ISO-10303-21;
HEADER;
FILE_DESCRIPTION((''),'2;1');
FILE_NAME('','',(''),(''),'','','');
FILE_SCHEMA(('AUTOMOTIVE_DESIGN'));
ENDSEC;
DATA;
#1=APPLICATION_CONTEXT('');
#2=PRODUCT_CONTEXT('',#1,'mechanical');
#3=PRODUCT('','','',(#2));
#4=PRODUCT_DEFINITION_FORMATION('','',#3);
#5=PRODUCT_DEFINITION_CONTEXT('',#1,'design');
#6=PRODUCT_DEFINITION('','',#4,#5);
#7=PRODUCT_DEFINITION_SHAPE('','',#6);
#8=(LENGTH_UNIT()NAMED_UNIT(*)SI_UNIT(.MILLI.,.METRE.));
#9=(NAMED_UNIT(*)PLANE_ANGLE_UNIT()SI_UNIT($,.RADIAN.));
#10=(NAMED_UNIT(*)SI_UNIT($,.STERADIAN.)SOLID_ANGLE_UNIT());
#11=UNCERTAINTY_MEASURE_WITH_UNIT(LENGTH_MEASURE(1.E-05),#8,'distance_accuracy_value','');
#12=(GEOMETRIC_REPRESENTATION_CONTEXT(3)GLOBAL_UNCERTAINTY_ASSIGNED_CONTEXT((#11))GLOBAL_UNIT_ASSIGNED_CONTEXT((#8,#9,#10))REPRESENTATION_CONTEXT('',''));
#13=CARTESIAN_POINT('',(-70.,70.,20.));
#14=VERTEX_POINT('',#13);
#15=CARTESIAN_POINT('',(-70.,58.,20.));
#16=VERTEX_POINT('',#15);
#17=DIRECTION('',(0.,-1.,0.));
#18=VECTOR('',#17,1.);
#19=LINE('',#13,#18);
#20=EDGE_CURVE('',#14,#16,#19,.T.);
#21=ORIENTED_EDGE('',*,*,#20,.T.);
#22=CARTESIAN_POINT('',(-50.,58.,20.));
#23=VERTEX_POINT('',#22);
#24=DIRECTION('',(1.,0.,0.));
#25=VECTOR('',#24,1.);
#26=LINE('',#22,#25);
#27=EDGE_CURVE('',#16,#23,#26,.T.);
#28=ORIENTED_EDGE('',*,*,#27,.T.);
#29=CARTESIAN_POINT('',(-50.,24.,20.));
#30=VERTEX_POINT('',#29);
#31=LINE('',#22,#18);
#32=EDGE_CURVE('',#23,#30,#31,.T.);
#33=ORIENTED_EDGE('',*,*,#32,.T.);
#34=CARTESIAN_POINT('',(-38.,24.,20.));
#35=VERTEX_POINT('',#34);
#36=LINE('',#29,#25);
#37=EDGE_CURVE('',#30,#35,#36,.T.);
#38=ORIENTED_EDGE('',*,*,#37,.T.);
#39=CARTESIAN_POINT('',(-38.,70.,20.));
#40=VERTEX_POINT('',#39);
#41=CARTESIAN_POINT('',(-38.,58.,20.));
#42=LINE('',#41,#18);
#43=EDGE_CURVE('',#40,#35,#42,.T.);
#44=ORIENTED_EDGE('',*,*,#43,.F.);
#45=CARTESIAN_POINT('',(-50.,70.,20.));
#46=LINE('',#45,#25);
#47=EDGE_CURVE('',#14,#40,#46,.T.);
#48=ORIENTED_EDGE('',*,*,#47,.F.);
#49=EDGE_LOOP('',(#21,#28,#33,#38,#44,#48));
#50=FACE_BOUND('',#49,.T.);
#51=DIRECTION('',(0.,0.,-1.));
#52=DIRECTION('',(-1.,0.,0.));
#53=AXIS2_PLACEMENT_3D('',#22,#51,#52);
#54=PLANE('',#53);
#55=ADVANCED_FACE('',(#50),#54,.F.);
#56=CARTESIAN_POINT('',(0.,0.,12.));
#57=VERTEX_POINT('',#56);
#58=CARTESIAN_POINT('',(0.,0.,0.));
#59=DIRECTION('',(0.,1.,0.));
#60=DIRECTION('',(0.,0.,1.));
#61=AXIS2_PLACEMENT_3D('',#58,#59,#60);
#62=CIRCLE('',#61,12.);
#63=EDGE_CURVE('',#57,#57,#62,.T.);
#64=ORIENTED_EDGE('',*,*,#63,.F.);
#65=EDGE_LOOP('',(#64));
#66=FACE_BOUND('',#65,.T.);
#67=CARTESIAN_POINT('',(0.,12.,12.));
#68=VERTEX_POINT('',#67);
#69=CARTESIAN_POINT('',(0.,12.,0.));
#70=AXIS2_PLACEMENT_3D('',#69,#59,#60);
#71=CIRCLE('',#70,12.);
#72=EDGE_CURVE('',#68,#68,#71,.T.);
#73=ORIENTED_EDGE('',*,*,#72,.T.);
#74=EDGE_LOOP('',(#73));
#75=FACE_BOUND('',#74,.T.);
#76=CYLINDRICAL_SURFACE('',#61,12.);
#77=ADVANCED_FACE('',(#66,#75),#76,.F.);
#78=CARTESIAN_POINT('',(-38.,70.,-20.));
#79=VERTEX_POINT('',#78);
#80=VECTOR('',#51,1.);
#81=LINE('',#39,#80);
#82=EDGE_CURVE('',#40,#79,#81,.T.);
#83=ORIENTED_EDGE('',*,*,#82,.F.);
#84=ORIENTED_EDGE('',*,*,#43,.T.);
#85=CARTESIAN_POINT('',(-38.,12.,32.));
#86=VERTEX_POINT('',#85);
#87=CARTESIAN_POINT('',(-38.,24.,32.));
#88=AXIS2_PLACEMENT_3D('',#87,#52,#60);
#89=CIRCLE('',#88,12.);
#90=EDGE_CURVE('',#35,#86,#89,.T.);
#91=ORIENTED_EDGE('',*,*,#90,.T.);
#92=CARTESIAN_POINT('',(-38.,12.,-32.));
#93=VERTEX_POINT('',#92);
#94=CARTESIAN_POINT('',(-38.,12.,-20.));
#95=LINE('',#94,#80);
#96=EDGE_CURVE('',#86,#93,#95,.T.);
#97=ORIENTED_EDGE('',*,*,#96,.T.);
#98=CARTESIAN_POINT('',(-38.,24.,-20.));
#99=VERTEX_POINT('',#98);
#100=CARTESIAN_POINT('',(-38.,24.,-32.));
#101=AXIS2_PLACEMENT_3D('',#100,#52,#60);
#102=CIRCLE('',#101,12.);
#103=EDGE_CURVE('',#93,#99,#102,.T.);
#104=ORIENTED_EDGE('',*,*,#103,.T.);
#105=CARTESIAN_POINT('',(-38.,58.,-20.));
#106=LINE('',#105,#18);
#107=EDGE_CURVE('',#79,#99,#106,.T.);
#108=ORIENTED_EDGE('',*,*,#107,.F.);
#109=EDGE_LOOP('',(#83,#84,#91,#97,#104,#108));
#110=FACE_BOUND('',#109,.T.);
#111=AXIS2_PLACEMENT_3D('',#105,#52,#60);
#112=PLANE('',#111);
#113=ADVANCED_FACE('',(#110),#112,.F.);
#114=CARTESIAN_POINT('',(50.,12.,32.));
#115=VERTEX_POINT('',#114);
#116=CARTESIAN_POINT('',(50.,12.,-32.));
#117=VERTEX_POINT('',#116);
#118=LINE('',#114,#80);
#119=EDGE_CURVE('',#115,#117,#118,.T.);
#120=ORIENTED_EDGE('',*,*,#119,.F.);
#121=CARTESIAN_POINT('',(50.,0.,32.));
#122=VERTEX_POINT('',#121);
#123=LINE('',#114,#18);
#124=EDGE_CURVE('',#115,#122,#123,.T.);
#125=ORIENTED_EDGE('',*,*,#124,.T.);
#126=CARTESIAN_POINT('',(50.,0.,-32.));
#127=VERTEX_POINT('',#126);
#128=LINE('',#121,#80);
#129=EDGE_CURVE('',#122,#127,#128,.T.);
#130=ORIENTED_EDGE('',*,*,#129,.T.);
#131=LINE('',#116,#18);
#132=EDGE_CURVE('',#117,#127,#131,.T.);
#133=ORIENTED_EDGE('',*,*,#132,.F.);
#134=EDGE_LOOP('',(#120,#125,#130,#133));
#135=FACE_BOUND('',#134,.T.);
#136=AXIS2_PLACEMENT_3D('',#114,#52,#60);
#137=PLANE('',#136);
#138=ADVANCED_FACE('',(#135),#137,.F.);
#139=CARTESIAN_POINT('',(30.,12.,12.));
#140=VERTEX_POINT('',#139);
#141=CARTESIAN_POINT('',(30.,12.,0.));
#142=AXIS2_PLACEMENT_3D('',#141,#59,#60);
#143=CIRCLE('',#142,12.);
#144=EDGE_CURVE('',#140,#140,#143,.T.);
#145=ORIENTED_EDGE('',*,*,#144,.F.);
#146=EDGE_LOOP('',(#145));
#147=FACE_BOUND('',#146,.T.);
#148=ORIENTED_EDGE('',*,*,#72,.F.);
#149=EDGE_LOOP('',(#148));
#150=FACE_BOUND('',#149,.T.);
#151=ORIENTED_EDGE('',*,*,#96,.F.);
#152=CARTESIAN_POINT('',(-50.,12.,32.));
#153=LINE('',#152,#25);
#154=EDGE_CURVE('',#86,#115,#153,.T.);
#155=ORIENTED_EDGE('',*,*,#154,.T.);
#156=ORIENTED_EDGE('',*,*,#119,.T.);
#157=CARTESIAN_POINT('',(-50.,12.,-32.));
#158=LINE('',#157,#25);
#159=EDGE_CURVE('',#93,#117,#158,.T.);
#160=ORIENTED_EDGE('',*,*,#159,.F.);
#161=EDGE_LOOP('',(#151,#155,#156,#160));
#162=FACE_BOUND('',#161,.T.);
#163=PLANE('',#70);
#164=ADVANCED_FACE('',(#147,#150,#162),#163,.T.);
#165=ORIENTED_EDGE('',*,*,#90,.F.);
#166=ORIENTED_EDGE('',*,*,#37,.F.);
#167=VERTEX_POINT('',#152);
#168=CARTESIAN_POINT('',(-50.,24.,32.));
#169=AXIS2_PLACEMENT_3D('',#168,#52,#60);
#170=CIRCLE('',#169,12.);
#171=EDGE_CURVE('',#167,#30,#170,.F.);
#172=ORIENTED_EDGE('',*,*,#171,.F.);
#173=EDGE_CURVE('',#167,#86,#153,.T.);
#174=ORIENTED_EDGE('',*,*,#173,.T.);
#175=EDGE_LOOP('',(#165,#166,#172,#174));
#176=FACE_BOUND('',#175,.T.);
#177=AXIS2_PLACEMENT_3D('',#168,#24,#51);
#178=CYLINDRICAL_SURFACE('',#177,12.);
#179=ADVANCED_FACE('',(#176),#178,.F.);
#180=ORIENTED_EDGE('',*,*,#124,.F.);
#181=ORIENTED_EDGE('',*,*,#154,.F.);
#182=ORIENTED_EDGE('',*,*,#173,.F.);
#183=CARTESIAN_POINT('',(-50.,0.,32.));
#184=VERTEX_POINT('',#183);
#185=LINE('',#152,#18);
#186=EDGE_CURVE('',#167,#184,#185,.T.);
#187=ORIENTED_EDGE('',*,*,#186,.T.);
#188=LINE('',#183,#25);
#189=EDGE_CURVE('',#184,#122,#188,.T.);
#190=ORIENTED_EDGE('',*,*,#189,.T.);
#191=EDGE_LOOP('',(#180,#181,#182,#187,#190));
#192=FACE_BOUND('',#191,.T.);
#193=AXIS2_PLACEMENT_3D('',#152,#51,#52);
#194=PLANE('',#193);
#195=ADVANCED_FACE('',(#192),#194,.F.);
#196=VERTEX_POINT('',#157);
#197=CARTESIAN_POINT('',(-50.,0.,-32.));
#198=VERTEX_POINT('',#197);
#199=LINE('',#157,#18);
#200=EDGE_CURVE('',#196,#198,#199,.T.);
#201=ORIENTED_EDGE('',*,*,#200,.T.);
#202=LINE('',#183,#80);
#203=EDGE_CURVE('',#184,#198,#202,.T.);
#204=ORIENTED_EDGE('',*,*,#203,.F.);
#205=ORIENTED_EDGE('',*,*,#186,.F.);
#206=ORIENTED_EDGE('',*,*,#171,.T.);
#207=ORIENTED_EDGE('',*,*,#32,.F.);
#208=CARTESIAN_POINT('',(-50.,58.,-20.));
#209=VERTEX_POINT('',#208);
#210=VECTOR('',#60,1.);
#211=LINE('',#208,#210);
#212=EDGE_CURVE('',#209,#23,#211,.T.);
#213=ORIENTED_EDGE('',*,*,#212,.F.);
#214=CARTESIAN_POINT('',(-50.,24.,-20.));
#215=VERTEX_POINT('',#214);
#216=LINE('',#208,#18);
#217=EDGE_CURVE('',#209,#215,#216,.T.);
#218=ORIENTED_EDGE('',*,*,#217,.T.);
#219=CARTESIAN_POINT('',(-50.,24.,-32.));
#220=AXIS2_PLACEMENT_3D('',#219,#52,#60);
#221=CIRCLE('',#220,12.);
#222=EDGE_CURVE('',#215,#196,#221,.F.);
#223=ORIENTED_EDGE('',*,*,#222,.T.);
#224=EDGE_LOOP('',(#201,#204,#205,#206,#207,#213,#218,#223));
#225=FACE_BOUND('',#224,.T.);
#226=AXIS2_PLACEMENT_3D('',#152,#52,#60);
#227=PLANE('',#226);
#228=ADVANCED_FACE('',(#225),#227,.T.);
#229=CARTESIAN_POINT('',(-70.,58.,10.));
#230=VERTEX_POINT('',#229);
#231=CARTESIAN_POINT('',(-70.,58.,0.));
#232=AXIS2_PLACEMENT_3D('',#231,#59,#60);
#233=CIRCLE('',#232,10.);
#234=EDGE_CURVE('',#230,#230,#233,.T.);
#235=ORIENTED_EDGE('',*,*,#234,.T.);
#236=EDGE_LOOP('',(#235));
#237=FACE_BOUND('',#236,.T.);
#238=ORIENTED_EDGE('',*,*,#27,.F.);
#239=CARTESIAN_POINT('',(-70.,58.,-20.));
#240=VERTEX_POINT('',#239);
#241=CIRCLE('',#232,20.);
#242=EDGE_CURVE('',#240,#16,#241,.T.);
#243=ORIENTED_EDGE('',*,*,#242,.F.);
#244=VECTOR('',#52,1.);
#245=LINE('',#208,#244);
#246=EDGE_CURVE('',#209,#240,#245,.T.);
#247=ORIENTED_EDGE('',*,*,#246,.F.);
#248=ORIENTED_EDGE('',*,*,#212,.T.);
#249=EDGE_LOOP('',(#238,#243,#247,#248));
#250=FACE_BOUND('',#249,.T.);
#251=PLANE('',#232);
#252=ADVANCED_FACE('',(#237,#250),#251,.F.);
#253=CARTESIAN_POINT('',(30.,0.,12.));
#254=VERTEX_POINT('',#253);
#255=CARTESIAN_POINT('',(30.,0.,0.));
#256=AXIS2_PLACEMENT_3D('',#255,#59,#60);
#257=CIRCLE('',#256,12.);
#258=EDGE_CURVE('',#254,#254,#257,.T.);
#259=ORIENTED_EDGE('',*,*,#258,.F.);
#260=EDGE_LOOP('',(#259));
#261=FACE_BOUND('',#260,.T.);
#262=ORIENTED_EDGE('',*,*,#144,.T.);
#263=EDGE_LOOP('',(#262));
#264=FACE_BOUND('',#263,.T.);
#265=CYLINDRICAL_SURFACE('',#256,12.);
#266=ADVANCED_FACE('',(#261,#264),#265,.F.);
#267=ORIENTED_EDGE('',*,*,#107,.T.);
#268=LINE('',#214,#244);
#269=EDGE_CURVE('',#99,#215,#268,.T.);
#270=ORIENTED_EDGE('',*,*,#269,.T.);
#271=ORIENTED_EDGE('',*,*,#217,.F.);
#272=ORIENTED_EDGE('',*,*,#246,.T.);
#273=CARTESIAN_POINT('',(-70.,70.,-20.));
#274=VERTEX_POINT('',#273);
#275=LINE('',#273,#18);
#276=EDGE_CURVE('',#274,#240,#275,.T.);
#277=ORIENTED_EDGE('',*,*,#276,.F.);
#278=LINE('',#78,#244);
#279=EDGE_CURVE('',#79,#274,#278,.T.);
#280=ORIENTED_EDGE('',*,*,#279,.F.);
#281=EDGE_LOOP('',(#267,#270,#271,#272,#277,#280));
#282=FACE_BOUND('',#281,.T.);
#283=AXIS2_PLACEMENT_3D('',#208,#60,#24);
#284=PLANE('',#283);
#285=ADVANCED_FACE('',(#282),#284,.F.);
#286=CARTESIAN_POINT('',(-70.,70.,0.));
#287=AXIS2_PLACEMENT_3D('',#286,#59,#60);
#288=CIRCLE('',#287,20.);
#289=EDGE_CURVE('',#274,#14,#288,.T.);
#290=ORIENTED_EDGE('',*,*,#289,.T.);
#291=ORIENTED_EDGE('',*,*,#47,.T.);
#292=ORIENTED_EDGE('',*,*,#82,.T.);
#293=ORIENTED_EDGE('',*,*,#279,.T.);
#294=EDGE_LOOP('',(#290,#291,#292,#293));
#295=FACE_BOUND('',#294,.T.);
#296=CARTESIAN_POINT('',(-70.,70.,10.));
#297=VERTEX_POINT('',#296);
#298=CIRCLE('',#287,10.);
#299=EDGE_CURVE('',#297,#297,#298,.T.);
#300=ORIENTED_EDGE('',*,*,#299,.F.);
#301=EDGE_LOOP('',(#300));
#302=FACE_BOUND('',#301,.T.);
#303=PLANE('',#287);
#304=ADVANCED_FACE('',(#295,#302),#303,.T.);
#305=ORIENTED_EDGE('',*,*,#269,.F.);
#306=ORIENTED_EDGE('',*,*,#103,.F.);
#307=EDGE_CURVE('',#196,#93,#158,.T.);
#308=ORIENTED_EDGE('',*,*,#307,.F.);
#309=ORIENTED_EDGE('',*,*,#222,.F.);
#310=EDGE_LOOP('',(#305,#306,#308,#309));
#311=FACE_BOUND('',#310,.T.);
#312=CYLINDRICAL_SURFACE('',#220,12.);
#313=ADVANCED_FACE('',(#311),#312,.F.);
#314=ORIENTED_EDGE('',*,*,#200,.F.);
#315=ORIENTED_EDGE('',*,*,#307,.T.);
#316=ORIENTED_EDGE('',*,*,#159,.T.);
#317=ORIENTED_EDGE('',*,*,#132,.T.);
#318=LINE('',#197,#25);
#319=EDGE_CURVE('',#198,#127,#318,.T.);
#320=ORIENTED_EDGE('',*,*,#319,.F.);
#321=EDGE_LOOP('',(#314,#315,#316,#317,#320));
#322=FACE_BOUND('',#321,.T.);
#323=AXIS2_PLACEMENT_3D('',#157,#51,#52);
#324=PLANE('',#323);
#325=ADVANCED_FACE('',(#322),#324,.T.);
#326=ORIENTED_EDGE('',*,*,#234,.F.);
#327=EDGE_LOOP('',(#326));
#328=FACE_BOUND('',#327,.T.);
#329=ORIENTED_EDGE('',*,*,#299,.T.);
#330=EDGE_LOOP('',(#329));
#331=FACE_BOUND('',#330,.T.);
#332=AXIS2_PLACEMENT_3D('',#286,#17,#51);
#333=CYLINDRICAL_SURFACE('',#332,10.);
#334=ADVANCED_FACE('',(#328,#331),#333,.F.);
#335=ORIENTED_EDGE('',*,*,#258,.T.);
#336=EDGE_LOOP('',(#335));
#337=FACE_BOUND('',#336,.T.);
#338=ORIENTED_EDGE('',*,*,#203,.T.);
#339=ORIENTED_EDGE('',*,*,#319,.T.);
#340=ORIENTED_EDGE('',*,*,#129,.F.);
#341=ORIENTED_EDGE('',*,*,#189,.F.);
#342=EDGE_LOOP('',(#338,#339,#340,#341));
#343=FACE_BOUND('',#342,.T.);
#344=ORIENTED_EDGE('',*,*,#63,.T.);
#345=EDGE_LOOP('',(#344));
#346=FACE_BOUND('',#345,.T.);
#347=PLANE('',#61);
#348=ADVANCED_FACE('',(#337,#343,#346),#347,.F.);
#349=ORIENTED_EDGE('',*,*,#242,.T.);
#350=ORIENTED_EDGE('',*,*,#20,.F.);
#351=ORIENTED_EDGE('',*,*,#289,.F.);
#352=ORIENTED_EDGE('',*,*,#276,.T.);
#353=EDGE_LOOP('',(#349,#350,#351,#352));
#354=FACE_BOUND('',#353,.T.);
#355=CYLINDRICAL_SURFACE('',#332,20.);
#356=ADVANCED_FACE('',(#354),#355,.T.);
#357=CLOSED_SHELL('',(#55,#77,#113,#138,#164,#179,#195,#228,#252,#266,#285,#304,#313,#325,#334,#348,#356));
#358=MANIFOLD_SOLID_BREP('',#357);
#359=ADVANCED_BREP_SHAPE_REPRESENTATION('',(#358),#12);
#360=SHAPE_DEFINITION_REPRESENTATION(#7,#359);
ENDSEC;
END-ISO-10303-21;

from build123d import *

# Parameters (mm, degrees)
SKETCH1_W               = 100
SKETCH1_H               = 64
BOSS_EXTRUDE1_DEPTH     = 12
CUT_EXTRUDE1_DEPTH      = 61.564015719
CUT_EXTRUDE1_DEPTH_BACK = 61.564015719
SKETCH2_R               = 12
SKETCH3_W               = 12
SKETCH3_H               = 40
BOSS_EXTRUDE2_DEPTH     = 46
SKETCH4_R               = 10
BOSS_EXTRUDE3_DEPTH     = 12
FILLET1_R               = 12


with BuildPart() as part:
    # Sketch1 → Boss-Extrude1 (new body)
    with BuildSketch(Plane(origin=(0, 0, 0), x_dir=(1, 0, 0), z_dir=(0, 1, 0))):
        Rectangle(SKETCH1_W, SKETCH1_H)
    extrude(amount=BOSS_EXTRUDE1_DEPTH)

    # Sketch2 → Cut-Extrude1 (cut, two sides: drawn at the far end of the back side and taken through both)
    with BuildSketch(Plane(origin=(0, 12, 0), x_dir=(1, 0, 0), z_dir=(0, 1, 0)).offset(-CUT_EXTRUDE1_DEPTH_BACK)):
        with Locations(Location((0, 0, 0), (0, 0, 270))):
            Circle(SKETCH2_R)
        with Locations(Location((30, 0, 0), (0, 0, 270))):
            Circle(SKETCH2_R)
    extrude(amount=CUT_EXTRUDE1_DEPTH + CUT_EXTRUDE1_DEPTH_BACK, mode=Mode.SUBTRACT)

    # Sketch3 → Boss-Extrude2 (add)
    with BuildSketch(Plane(origin=(0, 12, 0), x_dir=(1, 0, 0), z_dir=(0, 1, 0))):
        with Locations((-44, 0)):
            Rectangle(SKETCH3_W, SKETCH3_H)
    extrude(amount=BOSS_EXTRUDE2_DEPTH)

    # Sketch4 → Boss-Extrude3 (add)
    with BuildSketch(Plane(origin=(0, 58, 0), x_dir=(1, 0, 0), z_dir=(0, 1, 0))):
        with BuildLine():
            Line((-50, 20), (-70, 20))
            ThreePointArc((-70, 20), (-90, 0), (-70, -20))
            Line((-70, -20), (-50, -20))
            Line((-50, -20), (-38, -20))
            Line((-38, -20), (-38, 20))
            Line((-38, 20), (-50, 20))
        make_face()
        with Locations(Location((-70, 0, 0), (0, 0, 270))):
            Circle(SKETCH4_R, mode=Mode.SUBTRACT)
    extrude(amount=BOSS_EXTRUDE3_DEPTH)

    # Fillet1
    fillet1_edges = [part.edges().sort_by_distance(p)[0] for p in [
        (-44, 12, -20),
        (-44, 12, 20),
    ]]
    fillet(fillet1_edges, radius=FILLET1_R - 0.0001)  # a hair under: the kernel refuses the full size


solid = part.part
